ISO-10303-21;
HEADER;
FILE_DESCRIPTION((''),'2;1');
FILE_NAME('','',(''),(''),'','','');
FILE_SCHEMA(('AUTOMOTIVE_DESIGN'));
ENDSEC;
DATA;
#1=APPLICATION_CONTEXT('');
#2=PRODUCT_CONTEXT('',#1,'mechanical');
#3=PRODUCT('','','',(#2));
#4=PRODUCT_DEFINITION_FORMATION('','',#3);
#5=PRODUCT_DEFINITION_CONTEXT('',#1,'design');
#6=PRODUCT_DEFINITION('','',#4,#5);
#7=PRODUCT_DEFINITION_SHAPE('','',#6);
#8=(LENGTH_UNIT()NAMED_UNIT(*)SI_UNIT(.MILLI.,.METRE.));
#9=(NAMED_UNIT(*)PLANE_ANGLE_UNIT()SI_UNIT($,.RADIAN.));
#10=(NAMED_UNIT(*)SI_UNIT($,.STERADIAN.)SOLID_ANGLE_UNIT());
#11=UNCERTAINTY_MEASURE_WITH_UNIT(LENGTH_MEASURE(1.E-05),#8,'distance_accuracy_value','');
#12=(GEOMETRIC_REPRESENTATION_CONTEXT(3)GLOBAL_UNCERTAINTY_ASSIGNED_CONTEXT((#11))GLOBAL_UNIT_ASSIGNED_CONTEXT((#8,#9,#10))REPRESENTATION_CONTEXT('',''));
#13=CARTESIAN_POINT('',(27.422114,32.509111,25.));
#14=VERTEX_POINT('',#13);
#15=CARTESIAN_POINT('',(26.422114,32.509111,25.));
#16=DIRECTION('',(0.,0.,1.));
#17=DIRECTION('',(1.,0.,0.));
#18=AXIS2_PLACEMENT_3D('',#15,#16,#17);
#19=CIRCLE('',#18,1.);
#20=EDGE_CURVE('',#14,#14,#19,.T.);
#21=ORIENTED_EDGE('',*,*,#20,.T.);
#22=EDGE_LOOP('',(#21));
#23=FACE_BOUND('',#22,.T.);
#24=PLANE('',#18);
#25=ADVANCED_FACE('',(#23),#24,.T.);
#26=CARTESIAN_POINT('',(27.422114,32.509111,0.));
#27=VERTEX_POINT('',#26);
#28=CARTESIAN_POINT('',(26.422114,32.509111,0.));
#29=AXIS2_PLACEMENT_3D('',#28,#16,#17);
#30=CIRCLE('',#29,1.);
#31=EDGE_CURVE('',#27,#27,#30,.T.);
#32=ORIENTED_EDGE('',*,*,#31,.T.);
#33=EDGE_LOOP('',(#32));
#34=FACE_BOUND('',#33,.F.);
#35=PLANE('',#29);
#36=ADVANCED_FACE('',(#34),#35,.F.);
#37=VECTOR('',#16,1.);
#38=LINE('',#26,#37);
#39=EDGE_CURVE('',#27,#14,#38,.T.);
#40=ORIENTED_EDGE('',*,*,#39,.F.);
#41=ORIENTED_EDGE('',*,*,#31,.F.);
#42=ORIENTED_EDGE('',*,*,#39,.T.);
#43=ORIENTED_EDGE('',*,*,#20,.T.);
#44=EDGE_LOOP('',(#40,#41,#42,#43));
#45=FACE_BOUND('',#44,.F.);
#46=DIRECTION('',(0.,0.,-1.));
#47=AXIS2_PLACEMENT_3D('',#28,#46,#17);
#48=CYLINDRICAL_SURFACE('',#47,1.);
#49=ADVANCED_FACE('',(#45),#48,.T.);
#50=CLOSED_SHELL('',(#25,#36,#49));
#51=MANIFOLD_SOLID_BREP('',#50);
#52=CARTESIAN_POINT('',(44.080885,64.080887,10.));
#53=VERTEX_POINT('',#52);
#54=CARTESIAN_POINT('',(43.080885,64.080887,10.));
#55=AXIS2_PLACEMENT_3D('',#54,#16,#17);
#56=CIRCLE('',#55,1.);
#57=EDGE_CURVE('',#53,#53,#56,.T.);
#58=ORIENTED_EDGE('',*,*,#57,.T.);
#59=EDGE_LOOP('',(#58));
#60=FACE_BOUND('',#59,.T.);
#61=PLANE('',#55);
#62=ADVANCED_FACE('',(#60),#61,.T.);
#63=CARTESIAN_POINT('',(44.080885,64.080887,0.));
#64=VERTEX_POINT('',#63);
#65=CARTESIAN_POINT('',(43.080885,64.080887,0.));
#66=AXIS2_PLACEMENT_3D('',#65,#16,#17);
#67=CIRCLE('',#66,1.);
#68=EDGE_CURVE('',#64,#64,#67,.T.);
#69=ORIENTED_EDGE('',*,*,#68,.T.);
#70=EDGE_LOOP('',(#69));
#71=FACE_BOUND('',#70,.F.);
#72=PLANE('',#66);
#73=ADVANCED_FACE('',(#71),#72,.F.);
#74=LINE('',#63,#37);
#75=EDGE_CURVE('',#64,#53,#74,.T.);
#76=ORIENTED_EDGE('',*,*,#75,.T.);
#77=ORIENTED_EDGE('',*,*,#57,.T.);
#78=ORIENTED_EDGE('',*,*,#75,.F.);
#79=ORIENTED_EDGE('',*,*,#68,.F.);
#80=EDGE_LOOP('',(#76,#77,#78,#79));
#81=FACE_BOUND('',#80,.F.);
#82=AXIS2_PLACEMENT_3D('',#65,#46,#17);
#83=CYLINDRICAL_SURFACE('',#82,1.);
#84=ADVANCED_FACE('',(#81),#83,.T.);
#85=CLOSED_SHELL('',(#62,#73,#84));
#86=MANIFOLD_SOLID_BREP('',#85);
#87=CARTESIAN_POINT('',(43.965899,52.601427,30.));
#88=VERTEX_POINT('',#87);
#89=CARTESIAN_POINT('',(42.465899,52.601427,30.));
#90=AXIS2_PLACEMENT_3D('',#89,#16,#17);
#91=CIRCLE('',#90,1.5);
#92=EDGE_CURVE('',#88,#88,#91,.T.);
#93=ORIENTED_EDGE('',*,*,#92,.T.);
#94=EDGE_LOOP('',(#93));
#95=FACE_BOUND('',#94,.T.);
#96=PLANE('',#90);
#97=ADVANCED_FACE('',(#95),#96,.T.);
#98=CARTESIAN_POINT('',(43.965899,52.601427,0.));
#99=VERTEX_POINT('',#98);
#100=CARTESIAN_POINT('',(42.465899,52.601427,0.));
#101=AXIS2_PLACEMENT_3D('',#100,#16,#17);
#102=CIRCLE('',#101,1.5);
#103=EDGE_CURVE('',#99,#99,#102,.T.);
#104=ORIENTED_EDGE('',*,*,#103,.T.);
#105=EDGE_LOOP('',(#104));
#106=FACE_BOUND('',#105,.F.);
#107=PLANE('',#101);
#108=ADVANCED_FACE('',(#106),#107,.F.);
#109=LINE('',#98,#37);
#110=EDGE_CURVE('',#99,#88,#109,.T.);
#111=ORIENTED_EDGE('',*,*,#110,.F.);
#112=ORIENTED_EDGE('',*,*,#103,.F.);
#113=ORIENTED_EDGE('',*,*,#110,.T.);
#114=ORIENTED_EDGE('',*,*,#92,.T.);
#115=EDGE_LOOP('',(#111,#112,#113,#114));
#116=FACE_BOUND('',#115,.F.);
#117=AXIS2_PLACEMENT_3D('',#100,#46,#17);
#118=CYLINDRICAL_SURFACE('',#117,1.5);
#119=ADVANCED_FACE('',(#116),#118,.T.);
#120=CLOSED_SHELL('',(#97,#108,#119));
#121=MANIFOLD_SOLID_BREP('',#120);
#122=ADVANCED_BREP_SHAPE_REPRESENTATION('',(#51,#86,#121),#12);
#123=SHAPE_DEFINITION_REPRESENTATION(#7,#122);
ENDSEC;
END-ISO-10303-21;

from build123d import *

# Parameters (mm, degrees)
F0_R     = 1
F1_DEPTH = 25
F2_R     = 1
F3_DEPTH = 10
F4_R     = 1.5
F5_DEPTH = 30


# Not quite as in the source:
# - a feature names something its author has since deleted; it is built from what else it names


with BuildPart() as f1:
    # F0 (on Top) → F1 (new body)
    with BuildSketch(Plane.XY):
        with Locations((26.4221140966, 32.5091108651)):
            Circle(F0_R)
    extrude(amount=F1_DEPTH)


with BuildPart() as f3:
    # F2 (on Top) → F3 (new body)
    with BuildSketch(Plane.XY):
        with Locations((43.0808849633, 64.0808865428)):
            Circle(F2_R)
    extrude(amount=F3_DEPTH)


with BuildPart() as f5:
    # F4 (on Top) → F5 (new body)
    with BuildSketch(Plane.XY):
        with Locations((42.4658991396, 52.6014268398)):
            Circle(F4_R)
    extrude(amount=F5_DEPTH)


solid = Compound([f1.part, f3.part, f5.part])
